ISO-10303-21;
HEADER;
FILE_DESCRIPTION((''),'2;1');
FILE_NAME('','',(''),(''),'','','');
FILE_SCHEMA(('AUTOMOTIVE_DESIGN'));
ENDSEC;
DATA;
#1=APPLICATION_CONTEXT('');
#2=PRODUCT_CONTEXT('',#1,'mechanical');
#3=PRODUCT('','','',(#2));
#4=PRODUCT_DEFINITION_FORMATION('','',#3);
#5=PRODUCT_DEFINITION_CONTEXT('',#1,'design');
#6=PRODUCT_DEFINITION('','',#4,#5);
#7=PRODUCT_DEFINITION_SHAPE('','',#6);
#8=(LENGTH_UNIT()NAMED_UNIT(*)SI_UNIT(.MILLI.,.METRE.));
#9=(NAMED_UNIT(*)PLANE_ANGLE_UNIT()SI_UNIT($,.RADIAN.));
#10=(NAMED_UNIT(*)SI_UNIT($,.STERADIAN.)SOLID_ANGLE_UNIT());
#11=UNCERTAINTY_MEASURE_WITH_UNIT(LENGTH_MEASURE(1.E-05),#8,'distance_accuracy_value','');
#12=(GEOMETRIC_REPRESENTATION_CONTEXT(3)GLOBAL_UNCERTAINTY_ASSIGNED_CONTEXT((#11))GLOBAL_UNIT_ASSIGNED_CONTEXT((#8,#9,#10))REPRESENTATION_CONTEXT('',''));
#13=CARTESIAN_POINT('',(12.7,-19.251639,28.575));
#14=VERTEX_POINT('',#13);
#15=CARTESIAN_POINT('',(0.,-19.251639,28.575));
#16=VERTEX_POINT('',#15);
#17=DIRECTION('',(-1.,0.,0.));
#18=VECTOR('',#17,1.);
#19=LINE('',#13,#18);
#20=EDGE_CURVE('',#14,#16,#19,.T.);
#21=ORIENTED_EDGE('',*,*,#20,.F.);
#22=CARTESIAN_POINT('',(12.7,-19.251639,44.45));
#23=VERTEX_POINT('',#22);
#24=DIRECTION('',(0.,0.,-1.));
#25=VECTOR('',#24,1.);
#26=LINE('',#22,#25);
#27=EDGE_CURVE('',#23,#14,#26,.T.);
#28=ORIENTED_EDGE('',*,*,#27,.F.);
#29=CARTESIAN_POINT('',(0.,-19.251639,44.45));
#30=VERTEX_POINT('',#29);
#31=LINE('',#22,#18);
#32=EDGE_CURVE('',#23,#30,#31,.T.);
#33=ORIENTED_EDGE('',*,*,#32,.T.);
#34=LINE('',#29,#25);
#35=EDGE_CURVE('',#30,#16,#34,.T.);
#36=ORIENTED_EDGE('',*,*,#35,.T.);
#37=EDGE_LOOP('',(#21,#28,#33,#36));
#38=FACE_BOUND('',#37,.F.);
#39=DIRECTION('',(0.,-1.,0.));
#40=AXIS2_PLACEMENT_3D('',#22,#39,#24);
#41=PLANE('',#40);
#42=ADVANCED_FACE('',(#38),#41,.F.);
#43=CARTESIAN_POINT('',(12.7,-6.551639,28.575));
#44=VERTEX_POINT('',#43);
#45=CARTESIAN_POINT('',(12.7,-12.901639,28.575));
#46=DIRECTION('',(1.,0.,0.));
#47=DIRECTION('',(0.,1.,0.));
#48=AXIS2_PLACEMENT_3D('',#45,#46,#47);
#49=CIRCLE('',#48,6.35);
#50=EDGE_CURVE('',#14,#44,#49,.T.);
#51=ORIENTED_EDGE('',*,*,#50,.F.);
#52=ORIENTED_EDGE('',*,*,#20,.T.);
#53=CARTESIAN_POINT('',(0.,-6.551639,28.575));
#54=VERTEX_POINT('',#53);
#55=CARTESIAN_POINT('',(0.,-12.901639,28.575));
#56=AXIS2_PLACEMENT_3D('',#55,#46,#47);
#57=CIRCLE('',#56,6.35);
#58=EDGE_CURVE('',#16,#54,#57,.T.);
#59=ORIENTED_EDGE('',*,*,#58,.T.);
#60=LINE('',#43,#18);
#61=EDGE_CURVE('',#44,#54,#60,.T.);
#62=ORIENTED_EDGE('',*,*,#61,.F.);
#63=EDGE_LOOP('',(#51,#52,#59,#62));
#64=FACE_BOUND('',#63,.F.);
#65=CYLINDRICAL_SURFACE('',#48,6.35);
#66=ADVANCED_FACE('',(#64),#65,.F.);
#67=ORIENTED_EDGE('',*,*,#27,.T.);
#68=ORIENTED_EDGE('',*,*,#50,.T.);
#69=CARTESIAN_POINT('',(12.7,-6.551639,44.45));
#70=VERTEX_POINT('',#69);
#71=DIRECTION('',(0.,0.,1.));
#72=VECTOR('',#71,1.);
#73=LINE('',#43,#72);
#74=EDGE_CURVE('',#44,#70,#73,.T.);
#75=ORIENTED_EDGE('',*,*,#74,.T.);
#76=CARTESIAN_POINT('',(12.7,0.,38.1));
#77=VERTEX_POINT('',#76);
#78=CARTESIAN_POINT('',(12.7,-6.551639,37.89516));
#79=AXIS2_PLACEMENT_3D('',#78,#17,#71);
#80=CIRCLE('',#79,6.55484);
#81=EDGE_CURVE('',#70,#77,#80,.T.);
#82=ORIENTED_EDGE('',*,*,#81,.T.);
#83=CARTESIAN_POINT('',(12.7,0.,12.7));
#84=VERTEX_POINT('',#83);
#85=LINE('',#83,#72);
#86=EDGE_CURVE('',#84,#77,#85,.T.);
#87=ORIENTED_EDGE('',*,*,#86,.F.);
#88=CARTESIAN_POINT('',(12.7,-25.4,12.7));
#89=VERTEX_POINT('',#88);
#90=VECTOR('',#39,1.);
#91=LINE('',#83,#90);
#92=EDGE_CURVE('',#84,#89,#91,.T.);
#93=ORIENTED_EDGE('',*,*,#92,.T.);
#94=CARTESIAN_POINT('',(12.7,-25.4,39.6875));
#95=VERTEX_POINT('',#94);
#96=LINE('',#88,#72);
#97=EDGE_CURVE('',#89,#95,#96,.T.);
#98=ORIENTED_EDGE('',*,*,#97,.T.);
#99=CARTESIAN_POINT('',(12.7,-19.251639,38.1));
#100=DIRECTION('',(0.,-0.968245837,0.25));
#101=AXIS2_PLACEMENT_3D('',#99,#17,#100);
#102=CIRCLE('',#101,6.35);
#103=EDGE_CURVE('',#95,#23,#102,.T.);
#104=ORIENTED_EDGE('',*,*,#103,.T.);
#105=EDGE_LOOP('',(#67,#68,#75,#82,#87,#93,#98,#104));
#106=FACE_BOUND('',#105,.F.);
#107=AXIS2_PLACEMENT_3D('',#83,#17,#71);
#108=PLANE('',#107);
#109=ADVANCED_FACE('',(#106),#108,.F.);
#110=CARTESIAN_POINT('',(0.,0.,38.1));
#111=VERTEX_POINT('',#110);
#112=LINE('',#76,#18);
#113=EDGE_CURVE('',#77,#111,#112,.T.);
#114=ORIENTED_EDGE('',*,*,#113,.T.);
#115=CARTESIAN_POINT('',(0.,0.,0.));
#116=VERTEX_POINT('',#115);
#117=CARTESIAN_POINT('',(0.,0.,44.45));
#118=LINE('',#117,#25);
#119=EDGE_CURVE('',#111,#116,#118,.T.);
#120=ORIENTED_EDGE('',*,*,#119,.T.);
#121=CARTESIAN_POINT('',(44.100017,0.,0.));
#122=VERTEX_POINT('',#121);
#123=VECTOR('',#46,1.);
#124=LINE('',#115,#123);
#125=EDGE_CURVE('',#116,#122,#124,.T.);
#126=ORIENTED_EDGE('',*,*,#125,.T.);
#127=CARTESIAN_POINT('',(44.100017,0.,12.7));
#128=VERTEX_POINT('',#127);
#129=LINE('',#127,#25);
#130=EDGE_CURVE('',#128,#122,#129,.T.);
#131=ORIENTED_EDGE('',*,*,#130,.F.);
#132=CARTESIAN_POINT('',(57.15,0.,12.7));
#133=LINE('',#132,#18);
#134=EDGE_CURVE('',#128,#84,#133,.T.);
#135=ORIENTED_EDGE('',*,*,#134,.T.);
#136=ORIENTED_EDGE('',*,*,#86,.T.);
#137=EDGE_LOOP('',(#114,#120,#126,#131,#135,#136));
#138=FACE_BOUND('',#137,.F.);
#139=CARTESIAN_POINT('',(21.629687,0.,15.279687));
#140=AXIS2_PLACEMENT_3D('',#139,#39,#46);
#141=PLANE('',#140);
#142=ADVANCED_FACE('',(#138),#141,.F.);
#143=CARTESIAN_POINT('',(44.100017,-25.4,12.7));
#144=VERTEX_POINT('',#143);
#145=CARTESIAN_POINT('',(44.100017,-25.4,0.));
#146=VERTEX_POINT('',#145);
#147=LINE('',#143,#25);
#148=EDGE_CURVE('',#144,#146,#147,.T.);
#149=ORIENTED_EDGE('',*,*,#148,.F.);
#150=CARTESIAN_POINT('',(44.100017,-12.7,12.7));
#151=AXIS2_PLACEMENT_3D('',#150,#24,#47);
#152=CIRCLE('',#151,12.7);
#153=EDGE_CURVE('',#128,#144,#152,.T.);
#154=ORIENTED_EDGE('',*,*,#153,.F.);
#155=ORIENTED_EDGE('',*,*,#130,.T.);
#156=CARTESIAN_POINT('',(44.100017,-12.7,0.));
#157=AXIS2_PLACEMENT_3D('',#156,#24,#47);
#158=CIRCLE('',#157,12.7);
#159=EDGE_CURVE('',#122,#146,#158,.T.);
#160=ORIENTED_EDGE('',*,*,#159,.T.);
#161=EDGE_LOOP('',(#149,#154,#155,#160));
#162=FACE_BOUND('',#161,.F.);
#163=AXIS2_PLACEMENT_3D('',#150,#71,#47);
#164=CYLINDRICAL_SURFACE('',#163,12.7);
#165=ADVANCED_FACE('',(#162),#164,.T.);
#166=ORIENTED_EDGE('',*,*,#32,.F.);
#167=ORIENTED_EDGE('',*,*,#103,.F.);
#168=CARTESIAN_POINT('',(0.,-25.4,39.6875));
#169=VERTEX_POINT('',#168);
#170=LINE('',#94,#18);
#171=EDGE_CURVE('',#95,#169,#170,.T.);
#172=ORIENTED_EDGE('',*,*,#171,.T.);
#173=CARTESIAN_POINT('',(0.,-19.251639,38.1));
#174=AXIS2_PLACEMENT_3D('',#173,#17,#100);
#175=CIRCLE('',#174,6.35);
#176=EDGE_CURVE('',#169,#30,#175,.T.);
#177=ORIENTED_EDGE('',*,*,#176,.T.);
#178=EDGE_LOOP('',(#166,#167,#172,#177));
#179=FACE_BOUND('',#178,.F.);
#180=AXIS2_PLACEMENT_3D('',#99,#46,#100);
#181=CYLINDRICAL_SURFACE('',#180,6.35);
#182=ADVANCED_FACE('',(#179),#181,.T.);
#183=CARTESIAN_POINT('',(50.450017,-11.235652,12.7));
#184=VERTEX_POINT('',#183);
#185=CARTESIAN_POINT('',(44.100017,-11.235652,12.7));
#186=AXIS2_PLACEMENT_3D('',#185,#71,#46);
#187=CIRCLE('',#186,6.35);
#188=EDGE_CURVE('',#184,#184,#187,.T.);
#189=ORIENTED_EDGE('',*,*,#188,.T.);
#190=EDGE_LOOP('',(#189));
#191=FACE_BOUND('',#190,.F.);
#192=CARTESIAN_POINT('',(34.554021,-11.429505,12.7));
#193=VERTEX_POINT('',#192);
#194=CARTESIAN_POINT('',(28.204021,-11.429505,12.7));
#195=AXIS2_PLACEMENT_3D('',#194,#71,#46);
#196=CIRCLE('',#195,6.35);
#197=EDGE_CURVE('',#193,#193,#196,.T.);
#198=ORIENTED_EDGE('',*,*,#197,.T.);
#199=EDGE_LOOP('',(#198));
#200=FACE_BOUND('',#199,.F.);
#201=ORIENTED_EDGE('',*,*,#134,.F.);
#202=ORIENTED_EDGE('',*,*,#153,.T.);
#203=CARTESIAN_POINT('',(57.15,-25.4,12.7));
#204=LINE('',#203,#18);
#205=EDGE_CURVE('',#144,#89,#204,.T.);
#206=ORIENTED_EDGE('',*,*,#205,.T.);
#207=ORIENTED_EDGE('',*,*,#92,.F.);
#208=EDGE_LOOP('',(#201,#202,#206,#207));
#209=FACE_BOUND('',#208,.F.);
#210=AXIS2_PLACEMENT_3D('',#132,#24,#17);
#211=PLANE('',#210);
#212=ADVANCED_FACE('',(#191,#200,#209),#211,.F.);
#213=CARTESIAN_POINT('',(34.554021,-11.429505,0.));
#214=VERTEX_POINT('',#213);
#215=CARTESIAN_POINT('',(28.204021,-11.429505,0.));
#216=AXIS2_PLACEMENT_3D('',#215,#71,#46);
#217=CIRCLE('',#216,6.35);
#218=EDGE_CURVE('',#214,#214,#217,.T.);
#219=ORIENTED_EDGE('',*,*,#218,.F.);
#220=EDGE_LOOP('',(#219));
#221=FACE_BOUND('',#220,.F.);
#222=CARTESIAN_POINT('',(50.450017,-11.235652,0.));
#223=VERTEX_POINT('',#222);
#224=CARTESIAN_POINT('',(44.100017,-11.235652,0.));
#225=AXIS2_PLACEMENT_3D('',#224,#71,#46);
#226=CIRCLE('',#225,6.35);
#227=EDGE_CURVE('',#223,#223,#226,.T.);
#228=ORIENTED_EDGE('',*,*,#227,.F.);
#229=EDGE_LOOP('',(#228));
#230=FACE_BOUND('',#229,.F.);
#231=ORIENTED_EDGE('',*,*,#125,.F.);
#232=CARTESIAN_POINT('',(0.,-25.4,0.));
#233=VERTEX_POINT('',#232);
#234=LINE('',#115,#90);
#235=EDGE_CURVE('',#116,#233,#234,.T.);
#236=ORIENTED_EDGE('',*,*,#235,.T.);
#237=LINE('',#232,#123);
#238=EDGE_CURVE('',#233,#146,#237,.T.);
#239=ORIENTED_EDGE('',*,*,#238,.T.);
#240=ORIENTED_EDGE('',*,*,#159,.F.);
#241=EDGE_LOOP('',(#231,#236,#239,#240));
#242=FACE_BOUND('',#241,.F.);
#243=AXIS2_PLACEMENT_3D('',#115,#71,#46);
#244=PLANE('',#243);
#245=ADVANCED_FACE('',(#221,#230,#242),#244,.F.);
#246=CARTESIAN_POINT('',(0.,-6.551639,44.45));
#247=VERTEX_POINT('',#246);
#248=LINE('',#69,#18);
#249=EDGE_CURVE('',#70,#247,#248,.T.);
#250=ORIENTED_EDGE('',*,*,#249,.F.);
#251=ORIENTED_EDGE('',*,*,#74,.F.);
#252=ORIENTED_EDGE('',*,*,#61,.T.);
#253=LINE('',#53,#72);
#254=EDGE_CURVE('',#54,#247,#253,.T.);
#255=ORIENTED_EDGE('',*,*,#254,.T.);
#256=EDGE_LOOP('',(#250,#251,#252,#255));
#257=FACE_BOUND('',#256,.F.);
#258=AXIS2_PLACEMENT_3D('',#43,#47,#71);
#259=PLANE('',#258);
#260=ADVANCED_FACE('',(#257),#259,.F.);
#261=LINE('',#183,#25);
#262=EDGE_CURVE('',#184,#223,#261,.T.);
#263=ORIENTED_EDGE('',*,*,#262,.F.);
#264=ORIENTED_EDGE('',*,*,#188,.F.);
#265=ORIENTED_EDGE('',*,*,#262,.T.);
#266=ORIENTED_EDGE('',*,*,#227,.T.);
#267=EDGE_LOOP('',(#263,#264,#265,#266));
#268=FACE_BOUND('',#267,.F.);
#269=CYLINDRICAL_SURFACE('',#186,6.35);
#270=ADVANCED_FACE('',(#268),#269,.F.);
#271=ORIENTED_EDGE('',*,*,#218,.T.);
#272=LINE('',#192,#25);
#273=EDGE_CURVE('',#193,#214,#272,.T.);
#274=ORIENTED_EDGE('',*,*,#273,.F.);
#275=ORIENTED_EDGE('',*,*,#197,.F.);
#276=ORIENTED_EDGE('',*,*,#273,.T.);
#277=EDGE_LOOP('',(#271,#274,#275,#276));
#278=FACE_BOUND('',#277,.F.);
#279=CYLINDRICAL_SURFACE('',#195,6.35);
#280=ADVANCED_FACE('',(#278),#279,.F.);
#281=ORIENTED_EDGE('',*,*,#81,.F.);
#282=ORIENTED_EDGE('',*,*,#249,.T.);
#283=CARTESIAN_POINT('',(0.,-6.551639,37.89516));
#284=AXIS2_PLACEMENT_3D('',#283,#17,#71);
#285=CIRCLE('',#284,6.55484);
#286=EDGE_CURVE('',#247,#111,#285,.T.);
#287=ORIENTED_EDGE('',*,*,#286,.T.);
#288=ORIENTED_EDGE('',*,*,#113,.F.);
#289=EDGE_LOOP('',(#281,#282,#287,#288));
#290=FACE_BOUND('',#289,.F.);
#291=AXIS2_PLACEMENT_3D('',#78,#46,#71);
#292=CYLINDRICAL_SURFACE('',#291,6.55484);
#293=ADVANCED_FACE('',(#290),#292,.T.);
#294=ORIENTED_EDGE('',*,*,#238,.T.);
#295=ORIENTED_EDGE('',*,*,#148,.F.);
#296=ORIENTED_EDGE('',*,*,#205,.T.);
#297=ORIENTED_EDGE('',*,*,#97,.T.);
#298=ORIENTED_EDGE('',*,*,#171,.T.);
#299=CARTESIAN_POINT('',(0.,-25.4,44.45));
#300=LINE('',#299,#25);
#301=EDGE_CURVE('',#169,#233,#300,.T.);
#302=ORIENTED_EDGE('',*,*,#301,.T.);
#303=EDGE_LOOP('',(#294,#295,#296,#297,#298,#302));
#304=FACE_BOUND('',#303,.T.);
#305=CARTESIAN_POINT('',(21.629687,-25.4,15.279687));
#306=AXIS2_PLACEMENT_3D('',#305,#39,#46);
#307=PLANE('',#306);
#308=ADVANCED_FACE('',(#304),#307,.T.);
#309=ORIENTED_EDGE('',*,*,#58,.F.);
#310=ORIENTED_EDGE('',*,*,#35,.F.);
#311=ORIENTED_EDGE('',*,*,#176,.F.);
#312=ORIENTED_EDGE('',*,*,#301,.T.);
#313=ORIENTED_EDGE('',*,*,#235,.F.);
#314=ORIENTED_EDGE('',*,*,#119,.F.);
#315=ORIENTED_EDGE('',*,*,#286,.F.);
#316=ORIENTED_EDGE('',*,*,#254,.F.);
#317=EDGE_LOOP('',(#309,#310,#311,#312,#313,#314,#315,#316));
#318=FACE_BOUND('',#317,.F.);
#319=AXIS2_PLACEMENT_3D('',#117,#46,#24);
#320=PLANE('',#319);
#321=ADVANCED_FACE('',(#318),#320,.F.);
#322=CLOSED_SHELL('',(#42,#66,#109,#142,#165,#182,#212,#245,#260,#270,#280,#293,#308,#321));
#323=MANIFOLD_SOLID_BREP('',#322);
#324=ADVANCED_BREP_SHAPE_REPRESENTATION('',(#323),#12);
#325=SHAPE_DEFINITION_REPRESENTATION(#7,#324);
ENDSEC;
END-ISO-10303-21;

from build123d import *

# Parameters (mm, degrees)
F1_DEPTH = 25.4
F3_DEPTH = 12.7
F4_R     = 6.35
F5_DEPTH = 12.7


with BuildPart() as f1:
    # F0 (on Front) → F1 (new body)
    with BuildSketch(Plane.XZ):
        Polygon((0, 44.45), (0, 0), (57.15, 0), (57.15, 12.7), (12.7, 12.7), (12.7, 44.45), align=None)
    extrude(amount=F1_DEPTH)

    # F2 (on face) → F3 (cut)
    with BuildSketch(Plane.YZ.offset(12.7)):
        with BuildLine():
            ThreePointArc((-19.2516389379, 28.575), (-12.9016389379, 22.225), (-6.5516389379, 28.575))
            ThreePointArc((-6.5516389379, 28.575), (-12.9016389379, 34.925), (-19.2516389379, 28.575))
        make_face()
        with BuildLine():
            ThreePointArc((-19.2516389379, 28.575), (-12.9016389379, 34.925), (-6.5516389379, 28.575))
            Line((-6.5516389379, 28.575), (-6.5516389379, 44.45))
            Line((-6.5516389379, 44.45), (-19.2516389379, 44.45))
            Line((-19.2516389379, 44.45), (-19.2516389379, 28.575))
        make_face()
        with BuildLine():
            Line((0, 44.45), (-6.5516389379, 44.45))
            ThreePointArc((-6.5516389379, 44.45), (-1.9896636866, 42.6019965832), (0, 38.1))
            Line((0, 38.1), (0, 44.45))
        make_face()
        with BuildLine():
            ThreePointArc((-25.4, 39.6875), (-23.1402039046, 43.1201157855), (-19.2516389379, 44.45))
            Line((-19.2516389379, 44.45), (-25.4, 44.45))
            Line((-25.4, 44.45), (-25.4, 39.6875))
        make_face()
    extrude(amount=-F3_DEPTH, mode=Mode.SUBTRACT)

    # F4 (on face) → F5 (cut)
    with BuildSketch(Plane.XY.offset(12.7)):
        with Locations((28.2040209995, -11.4295053813)):
            Circle(F4_R)
        with Locations((44.1000172256, -11.2356515601)):
            Circle(F4_R)
        with BuildLine():
            ThreePointArc((44.1000172256, 0), (56.8000172256, -12.7), (44.1000172256, -25.4))
            Line((44.1000172256, -25.4), (57.15, -25.4))
            Line((57.15, -25.4), (57.15, 0))
            Line((57.15, 0), (44.1000172256, 0))
        make_face()
    extrude(amount=-F5_DEPTH, mode=Mode.SUBTRACT)


solid = f1.part
